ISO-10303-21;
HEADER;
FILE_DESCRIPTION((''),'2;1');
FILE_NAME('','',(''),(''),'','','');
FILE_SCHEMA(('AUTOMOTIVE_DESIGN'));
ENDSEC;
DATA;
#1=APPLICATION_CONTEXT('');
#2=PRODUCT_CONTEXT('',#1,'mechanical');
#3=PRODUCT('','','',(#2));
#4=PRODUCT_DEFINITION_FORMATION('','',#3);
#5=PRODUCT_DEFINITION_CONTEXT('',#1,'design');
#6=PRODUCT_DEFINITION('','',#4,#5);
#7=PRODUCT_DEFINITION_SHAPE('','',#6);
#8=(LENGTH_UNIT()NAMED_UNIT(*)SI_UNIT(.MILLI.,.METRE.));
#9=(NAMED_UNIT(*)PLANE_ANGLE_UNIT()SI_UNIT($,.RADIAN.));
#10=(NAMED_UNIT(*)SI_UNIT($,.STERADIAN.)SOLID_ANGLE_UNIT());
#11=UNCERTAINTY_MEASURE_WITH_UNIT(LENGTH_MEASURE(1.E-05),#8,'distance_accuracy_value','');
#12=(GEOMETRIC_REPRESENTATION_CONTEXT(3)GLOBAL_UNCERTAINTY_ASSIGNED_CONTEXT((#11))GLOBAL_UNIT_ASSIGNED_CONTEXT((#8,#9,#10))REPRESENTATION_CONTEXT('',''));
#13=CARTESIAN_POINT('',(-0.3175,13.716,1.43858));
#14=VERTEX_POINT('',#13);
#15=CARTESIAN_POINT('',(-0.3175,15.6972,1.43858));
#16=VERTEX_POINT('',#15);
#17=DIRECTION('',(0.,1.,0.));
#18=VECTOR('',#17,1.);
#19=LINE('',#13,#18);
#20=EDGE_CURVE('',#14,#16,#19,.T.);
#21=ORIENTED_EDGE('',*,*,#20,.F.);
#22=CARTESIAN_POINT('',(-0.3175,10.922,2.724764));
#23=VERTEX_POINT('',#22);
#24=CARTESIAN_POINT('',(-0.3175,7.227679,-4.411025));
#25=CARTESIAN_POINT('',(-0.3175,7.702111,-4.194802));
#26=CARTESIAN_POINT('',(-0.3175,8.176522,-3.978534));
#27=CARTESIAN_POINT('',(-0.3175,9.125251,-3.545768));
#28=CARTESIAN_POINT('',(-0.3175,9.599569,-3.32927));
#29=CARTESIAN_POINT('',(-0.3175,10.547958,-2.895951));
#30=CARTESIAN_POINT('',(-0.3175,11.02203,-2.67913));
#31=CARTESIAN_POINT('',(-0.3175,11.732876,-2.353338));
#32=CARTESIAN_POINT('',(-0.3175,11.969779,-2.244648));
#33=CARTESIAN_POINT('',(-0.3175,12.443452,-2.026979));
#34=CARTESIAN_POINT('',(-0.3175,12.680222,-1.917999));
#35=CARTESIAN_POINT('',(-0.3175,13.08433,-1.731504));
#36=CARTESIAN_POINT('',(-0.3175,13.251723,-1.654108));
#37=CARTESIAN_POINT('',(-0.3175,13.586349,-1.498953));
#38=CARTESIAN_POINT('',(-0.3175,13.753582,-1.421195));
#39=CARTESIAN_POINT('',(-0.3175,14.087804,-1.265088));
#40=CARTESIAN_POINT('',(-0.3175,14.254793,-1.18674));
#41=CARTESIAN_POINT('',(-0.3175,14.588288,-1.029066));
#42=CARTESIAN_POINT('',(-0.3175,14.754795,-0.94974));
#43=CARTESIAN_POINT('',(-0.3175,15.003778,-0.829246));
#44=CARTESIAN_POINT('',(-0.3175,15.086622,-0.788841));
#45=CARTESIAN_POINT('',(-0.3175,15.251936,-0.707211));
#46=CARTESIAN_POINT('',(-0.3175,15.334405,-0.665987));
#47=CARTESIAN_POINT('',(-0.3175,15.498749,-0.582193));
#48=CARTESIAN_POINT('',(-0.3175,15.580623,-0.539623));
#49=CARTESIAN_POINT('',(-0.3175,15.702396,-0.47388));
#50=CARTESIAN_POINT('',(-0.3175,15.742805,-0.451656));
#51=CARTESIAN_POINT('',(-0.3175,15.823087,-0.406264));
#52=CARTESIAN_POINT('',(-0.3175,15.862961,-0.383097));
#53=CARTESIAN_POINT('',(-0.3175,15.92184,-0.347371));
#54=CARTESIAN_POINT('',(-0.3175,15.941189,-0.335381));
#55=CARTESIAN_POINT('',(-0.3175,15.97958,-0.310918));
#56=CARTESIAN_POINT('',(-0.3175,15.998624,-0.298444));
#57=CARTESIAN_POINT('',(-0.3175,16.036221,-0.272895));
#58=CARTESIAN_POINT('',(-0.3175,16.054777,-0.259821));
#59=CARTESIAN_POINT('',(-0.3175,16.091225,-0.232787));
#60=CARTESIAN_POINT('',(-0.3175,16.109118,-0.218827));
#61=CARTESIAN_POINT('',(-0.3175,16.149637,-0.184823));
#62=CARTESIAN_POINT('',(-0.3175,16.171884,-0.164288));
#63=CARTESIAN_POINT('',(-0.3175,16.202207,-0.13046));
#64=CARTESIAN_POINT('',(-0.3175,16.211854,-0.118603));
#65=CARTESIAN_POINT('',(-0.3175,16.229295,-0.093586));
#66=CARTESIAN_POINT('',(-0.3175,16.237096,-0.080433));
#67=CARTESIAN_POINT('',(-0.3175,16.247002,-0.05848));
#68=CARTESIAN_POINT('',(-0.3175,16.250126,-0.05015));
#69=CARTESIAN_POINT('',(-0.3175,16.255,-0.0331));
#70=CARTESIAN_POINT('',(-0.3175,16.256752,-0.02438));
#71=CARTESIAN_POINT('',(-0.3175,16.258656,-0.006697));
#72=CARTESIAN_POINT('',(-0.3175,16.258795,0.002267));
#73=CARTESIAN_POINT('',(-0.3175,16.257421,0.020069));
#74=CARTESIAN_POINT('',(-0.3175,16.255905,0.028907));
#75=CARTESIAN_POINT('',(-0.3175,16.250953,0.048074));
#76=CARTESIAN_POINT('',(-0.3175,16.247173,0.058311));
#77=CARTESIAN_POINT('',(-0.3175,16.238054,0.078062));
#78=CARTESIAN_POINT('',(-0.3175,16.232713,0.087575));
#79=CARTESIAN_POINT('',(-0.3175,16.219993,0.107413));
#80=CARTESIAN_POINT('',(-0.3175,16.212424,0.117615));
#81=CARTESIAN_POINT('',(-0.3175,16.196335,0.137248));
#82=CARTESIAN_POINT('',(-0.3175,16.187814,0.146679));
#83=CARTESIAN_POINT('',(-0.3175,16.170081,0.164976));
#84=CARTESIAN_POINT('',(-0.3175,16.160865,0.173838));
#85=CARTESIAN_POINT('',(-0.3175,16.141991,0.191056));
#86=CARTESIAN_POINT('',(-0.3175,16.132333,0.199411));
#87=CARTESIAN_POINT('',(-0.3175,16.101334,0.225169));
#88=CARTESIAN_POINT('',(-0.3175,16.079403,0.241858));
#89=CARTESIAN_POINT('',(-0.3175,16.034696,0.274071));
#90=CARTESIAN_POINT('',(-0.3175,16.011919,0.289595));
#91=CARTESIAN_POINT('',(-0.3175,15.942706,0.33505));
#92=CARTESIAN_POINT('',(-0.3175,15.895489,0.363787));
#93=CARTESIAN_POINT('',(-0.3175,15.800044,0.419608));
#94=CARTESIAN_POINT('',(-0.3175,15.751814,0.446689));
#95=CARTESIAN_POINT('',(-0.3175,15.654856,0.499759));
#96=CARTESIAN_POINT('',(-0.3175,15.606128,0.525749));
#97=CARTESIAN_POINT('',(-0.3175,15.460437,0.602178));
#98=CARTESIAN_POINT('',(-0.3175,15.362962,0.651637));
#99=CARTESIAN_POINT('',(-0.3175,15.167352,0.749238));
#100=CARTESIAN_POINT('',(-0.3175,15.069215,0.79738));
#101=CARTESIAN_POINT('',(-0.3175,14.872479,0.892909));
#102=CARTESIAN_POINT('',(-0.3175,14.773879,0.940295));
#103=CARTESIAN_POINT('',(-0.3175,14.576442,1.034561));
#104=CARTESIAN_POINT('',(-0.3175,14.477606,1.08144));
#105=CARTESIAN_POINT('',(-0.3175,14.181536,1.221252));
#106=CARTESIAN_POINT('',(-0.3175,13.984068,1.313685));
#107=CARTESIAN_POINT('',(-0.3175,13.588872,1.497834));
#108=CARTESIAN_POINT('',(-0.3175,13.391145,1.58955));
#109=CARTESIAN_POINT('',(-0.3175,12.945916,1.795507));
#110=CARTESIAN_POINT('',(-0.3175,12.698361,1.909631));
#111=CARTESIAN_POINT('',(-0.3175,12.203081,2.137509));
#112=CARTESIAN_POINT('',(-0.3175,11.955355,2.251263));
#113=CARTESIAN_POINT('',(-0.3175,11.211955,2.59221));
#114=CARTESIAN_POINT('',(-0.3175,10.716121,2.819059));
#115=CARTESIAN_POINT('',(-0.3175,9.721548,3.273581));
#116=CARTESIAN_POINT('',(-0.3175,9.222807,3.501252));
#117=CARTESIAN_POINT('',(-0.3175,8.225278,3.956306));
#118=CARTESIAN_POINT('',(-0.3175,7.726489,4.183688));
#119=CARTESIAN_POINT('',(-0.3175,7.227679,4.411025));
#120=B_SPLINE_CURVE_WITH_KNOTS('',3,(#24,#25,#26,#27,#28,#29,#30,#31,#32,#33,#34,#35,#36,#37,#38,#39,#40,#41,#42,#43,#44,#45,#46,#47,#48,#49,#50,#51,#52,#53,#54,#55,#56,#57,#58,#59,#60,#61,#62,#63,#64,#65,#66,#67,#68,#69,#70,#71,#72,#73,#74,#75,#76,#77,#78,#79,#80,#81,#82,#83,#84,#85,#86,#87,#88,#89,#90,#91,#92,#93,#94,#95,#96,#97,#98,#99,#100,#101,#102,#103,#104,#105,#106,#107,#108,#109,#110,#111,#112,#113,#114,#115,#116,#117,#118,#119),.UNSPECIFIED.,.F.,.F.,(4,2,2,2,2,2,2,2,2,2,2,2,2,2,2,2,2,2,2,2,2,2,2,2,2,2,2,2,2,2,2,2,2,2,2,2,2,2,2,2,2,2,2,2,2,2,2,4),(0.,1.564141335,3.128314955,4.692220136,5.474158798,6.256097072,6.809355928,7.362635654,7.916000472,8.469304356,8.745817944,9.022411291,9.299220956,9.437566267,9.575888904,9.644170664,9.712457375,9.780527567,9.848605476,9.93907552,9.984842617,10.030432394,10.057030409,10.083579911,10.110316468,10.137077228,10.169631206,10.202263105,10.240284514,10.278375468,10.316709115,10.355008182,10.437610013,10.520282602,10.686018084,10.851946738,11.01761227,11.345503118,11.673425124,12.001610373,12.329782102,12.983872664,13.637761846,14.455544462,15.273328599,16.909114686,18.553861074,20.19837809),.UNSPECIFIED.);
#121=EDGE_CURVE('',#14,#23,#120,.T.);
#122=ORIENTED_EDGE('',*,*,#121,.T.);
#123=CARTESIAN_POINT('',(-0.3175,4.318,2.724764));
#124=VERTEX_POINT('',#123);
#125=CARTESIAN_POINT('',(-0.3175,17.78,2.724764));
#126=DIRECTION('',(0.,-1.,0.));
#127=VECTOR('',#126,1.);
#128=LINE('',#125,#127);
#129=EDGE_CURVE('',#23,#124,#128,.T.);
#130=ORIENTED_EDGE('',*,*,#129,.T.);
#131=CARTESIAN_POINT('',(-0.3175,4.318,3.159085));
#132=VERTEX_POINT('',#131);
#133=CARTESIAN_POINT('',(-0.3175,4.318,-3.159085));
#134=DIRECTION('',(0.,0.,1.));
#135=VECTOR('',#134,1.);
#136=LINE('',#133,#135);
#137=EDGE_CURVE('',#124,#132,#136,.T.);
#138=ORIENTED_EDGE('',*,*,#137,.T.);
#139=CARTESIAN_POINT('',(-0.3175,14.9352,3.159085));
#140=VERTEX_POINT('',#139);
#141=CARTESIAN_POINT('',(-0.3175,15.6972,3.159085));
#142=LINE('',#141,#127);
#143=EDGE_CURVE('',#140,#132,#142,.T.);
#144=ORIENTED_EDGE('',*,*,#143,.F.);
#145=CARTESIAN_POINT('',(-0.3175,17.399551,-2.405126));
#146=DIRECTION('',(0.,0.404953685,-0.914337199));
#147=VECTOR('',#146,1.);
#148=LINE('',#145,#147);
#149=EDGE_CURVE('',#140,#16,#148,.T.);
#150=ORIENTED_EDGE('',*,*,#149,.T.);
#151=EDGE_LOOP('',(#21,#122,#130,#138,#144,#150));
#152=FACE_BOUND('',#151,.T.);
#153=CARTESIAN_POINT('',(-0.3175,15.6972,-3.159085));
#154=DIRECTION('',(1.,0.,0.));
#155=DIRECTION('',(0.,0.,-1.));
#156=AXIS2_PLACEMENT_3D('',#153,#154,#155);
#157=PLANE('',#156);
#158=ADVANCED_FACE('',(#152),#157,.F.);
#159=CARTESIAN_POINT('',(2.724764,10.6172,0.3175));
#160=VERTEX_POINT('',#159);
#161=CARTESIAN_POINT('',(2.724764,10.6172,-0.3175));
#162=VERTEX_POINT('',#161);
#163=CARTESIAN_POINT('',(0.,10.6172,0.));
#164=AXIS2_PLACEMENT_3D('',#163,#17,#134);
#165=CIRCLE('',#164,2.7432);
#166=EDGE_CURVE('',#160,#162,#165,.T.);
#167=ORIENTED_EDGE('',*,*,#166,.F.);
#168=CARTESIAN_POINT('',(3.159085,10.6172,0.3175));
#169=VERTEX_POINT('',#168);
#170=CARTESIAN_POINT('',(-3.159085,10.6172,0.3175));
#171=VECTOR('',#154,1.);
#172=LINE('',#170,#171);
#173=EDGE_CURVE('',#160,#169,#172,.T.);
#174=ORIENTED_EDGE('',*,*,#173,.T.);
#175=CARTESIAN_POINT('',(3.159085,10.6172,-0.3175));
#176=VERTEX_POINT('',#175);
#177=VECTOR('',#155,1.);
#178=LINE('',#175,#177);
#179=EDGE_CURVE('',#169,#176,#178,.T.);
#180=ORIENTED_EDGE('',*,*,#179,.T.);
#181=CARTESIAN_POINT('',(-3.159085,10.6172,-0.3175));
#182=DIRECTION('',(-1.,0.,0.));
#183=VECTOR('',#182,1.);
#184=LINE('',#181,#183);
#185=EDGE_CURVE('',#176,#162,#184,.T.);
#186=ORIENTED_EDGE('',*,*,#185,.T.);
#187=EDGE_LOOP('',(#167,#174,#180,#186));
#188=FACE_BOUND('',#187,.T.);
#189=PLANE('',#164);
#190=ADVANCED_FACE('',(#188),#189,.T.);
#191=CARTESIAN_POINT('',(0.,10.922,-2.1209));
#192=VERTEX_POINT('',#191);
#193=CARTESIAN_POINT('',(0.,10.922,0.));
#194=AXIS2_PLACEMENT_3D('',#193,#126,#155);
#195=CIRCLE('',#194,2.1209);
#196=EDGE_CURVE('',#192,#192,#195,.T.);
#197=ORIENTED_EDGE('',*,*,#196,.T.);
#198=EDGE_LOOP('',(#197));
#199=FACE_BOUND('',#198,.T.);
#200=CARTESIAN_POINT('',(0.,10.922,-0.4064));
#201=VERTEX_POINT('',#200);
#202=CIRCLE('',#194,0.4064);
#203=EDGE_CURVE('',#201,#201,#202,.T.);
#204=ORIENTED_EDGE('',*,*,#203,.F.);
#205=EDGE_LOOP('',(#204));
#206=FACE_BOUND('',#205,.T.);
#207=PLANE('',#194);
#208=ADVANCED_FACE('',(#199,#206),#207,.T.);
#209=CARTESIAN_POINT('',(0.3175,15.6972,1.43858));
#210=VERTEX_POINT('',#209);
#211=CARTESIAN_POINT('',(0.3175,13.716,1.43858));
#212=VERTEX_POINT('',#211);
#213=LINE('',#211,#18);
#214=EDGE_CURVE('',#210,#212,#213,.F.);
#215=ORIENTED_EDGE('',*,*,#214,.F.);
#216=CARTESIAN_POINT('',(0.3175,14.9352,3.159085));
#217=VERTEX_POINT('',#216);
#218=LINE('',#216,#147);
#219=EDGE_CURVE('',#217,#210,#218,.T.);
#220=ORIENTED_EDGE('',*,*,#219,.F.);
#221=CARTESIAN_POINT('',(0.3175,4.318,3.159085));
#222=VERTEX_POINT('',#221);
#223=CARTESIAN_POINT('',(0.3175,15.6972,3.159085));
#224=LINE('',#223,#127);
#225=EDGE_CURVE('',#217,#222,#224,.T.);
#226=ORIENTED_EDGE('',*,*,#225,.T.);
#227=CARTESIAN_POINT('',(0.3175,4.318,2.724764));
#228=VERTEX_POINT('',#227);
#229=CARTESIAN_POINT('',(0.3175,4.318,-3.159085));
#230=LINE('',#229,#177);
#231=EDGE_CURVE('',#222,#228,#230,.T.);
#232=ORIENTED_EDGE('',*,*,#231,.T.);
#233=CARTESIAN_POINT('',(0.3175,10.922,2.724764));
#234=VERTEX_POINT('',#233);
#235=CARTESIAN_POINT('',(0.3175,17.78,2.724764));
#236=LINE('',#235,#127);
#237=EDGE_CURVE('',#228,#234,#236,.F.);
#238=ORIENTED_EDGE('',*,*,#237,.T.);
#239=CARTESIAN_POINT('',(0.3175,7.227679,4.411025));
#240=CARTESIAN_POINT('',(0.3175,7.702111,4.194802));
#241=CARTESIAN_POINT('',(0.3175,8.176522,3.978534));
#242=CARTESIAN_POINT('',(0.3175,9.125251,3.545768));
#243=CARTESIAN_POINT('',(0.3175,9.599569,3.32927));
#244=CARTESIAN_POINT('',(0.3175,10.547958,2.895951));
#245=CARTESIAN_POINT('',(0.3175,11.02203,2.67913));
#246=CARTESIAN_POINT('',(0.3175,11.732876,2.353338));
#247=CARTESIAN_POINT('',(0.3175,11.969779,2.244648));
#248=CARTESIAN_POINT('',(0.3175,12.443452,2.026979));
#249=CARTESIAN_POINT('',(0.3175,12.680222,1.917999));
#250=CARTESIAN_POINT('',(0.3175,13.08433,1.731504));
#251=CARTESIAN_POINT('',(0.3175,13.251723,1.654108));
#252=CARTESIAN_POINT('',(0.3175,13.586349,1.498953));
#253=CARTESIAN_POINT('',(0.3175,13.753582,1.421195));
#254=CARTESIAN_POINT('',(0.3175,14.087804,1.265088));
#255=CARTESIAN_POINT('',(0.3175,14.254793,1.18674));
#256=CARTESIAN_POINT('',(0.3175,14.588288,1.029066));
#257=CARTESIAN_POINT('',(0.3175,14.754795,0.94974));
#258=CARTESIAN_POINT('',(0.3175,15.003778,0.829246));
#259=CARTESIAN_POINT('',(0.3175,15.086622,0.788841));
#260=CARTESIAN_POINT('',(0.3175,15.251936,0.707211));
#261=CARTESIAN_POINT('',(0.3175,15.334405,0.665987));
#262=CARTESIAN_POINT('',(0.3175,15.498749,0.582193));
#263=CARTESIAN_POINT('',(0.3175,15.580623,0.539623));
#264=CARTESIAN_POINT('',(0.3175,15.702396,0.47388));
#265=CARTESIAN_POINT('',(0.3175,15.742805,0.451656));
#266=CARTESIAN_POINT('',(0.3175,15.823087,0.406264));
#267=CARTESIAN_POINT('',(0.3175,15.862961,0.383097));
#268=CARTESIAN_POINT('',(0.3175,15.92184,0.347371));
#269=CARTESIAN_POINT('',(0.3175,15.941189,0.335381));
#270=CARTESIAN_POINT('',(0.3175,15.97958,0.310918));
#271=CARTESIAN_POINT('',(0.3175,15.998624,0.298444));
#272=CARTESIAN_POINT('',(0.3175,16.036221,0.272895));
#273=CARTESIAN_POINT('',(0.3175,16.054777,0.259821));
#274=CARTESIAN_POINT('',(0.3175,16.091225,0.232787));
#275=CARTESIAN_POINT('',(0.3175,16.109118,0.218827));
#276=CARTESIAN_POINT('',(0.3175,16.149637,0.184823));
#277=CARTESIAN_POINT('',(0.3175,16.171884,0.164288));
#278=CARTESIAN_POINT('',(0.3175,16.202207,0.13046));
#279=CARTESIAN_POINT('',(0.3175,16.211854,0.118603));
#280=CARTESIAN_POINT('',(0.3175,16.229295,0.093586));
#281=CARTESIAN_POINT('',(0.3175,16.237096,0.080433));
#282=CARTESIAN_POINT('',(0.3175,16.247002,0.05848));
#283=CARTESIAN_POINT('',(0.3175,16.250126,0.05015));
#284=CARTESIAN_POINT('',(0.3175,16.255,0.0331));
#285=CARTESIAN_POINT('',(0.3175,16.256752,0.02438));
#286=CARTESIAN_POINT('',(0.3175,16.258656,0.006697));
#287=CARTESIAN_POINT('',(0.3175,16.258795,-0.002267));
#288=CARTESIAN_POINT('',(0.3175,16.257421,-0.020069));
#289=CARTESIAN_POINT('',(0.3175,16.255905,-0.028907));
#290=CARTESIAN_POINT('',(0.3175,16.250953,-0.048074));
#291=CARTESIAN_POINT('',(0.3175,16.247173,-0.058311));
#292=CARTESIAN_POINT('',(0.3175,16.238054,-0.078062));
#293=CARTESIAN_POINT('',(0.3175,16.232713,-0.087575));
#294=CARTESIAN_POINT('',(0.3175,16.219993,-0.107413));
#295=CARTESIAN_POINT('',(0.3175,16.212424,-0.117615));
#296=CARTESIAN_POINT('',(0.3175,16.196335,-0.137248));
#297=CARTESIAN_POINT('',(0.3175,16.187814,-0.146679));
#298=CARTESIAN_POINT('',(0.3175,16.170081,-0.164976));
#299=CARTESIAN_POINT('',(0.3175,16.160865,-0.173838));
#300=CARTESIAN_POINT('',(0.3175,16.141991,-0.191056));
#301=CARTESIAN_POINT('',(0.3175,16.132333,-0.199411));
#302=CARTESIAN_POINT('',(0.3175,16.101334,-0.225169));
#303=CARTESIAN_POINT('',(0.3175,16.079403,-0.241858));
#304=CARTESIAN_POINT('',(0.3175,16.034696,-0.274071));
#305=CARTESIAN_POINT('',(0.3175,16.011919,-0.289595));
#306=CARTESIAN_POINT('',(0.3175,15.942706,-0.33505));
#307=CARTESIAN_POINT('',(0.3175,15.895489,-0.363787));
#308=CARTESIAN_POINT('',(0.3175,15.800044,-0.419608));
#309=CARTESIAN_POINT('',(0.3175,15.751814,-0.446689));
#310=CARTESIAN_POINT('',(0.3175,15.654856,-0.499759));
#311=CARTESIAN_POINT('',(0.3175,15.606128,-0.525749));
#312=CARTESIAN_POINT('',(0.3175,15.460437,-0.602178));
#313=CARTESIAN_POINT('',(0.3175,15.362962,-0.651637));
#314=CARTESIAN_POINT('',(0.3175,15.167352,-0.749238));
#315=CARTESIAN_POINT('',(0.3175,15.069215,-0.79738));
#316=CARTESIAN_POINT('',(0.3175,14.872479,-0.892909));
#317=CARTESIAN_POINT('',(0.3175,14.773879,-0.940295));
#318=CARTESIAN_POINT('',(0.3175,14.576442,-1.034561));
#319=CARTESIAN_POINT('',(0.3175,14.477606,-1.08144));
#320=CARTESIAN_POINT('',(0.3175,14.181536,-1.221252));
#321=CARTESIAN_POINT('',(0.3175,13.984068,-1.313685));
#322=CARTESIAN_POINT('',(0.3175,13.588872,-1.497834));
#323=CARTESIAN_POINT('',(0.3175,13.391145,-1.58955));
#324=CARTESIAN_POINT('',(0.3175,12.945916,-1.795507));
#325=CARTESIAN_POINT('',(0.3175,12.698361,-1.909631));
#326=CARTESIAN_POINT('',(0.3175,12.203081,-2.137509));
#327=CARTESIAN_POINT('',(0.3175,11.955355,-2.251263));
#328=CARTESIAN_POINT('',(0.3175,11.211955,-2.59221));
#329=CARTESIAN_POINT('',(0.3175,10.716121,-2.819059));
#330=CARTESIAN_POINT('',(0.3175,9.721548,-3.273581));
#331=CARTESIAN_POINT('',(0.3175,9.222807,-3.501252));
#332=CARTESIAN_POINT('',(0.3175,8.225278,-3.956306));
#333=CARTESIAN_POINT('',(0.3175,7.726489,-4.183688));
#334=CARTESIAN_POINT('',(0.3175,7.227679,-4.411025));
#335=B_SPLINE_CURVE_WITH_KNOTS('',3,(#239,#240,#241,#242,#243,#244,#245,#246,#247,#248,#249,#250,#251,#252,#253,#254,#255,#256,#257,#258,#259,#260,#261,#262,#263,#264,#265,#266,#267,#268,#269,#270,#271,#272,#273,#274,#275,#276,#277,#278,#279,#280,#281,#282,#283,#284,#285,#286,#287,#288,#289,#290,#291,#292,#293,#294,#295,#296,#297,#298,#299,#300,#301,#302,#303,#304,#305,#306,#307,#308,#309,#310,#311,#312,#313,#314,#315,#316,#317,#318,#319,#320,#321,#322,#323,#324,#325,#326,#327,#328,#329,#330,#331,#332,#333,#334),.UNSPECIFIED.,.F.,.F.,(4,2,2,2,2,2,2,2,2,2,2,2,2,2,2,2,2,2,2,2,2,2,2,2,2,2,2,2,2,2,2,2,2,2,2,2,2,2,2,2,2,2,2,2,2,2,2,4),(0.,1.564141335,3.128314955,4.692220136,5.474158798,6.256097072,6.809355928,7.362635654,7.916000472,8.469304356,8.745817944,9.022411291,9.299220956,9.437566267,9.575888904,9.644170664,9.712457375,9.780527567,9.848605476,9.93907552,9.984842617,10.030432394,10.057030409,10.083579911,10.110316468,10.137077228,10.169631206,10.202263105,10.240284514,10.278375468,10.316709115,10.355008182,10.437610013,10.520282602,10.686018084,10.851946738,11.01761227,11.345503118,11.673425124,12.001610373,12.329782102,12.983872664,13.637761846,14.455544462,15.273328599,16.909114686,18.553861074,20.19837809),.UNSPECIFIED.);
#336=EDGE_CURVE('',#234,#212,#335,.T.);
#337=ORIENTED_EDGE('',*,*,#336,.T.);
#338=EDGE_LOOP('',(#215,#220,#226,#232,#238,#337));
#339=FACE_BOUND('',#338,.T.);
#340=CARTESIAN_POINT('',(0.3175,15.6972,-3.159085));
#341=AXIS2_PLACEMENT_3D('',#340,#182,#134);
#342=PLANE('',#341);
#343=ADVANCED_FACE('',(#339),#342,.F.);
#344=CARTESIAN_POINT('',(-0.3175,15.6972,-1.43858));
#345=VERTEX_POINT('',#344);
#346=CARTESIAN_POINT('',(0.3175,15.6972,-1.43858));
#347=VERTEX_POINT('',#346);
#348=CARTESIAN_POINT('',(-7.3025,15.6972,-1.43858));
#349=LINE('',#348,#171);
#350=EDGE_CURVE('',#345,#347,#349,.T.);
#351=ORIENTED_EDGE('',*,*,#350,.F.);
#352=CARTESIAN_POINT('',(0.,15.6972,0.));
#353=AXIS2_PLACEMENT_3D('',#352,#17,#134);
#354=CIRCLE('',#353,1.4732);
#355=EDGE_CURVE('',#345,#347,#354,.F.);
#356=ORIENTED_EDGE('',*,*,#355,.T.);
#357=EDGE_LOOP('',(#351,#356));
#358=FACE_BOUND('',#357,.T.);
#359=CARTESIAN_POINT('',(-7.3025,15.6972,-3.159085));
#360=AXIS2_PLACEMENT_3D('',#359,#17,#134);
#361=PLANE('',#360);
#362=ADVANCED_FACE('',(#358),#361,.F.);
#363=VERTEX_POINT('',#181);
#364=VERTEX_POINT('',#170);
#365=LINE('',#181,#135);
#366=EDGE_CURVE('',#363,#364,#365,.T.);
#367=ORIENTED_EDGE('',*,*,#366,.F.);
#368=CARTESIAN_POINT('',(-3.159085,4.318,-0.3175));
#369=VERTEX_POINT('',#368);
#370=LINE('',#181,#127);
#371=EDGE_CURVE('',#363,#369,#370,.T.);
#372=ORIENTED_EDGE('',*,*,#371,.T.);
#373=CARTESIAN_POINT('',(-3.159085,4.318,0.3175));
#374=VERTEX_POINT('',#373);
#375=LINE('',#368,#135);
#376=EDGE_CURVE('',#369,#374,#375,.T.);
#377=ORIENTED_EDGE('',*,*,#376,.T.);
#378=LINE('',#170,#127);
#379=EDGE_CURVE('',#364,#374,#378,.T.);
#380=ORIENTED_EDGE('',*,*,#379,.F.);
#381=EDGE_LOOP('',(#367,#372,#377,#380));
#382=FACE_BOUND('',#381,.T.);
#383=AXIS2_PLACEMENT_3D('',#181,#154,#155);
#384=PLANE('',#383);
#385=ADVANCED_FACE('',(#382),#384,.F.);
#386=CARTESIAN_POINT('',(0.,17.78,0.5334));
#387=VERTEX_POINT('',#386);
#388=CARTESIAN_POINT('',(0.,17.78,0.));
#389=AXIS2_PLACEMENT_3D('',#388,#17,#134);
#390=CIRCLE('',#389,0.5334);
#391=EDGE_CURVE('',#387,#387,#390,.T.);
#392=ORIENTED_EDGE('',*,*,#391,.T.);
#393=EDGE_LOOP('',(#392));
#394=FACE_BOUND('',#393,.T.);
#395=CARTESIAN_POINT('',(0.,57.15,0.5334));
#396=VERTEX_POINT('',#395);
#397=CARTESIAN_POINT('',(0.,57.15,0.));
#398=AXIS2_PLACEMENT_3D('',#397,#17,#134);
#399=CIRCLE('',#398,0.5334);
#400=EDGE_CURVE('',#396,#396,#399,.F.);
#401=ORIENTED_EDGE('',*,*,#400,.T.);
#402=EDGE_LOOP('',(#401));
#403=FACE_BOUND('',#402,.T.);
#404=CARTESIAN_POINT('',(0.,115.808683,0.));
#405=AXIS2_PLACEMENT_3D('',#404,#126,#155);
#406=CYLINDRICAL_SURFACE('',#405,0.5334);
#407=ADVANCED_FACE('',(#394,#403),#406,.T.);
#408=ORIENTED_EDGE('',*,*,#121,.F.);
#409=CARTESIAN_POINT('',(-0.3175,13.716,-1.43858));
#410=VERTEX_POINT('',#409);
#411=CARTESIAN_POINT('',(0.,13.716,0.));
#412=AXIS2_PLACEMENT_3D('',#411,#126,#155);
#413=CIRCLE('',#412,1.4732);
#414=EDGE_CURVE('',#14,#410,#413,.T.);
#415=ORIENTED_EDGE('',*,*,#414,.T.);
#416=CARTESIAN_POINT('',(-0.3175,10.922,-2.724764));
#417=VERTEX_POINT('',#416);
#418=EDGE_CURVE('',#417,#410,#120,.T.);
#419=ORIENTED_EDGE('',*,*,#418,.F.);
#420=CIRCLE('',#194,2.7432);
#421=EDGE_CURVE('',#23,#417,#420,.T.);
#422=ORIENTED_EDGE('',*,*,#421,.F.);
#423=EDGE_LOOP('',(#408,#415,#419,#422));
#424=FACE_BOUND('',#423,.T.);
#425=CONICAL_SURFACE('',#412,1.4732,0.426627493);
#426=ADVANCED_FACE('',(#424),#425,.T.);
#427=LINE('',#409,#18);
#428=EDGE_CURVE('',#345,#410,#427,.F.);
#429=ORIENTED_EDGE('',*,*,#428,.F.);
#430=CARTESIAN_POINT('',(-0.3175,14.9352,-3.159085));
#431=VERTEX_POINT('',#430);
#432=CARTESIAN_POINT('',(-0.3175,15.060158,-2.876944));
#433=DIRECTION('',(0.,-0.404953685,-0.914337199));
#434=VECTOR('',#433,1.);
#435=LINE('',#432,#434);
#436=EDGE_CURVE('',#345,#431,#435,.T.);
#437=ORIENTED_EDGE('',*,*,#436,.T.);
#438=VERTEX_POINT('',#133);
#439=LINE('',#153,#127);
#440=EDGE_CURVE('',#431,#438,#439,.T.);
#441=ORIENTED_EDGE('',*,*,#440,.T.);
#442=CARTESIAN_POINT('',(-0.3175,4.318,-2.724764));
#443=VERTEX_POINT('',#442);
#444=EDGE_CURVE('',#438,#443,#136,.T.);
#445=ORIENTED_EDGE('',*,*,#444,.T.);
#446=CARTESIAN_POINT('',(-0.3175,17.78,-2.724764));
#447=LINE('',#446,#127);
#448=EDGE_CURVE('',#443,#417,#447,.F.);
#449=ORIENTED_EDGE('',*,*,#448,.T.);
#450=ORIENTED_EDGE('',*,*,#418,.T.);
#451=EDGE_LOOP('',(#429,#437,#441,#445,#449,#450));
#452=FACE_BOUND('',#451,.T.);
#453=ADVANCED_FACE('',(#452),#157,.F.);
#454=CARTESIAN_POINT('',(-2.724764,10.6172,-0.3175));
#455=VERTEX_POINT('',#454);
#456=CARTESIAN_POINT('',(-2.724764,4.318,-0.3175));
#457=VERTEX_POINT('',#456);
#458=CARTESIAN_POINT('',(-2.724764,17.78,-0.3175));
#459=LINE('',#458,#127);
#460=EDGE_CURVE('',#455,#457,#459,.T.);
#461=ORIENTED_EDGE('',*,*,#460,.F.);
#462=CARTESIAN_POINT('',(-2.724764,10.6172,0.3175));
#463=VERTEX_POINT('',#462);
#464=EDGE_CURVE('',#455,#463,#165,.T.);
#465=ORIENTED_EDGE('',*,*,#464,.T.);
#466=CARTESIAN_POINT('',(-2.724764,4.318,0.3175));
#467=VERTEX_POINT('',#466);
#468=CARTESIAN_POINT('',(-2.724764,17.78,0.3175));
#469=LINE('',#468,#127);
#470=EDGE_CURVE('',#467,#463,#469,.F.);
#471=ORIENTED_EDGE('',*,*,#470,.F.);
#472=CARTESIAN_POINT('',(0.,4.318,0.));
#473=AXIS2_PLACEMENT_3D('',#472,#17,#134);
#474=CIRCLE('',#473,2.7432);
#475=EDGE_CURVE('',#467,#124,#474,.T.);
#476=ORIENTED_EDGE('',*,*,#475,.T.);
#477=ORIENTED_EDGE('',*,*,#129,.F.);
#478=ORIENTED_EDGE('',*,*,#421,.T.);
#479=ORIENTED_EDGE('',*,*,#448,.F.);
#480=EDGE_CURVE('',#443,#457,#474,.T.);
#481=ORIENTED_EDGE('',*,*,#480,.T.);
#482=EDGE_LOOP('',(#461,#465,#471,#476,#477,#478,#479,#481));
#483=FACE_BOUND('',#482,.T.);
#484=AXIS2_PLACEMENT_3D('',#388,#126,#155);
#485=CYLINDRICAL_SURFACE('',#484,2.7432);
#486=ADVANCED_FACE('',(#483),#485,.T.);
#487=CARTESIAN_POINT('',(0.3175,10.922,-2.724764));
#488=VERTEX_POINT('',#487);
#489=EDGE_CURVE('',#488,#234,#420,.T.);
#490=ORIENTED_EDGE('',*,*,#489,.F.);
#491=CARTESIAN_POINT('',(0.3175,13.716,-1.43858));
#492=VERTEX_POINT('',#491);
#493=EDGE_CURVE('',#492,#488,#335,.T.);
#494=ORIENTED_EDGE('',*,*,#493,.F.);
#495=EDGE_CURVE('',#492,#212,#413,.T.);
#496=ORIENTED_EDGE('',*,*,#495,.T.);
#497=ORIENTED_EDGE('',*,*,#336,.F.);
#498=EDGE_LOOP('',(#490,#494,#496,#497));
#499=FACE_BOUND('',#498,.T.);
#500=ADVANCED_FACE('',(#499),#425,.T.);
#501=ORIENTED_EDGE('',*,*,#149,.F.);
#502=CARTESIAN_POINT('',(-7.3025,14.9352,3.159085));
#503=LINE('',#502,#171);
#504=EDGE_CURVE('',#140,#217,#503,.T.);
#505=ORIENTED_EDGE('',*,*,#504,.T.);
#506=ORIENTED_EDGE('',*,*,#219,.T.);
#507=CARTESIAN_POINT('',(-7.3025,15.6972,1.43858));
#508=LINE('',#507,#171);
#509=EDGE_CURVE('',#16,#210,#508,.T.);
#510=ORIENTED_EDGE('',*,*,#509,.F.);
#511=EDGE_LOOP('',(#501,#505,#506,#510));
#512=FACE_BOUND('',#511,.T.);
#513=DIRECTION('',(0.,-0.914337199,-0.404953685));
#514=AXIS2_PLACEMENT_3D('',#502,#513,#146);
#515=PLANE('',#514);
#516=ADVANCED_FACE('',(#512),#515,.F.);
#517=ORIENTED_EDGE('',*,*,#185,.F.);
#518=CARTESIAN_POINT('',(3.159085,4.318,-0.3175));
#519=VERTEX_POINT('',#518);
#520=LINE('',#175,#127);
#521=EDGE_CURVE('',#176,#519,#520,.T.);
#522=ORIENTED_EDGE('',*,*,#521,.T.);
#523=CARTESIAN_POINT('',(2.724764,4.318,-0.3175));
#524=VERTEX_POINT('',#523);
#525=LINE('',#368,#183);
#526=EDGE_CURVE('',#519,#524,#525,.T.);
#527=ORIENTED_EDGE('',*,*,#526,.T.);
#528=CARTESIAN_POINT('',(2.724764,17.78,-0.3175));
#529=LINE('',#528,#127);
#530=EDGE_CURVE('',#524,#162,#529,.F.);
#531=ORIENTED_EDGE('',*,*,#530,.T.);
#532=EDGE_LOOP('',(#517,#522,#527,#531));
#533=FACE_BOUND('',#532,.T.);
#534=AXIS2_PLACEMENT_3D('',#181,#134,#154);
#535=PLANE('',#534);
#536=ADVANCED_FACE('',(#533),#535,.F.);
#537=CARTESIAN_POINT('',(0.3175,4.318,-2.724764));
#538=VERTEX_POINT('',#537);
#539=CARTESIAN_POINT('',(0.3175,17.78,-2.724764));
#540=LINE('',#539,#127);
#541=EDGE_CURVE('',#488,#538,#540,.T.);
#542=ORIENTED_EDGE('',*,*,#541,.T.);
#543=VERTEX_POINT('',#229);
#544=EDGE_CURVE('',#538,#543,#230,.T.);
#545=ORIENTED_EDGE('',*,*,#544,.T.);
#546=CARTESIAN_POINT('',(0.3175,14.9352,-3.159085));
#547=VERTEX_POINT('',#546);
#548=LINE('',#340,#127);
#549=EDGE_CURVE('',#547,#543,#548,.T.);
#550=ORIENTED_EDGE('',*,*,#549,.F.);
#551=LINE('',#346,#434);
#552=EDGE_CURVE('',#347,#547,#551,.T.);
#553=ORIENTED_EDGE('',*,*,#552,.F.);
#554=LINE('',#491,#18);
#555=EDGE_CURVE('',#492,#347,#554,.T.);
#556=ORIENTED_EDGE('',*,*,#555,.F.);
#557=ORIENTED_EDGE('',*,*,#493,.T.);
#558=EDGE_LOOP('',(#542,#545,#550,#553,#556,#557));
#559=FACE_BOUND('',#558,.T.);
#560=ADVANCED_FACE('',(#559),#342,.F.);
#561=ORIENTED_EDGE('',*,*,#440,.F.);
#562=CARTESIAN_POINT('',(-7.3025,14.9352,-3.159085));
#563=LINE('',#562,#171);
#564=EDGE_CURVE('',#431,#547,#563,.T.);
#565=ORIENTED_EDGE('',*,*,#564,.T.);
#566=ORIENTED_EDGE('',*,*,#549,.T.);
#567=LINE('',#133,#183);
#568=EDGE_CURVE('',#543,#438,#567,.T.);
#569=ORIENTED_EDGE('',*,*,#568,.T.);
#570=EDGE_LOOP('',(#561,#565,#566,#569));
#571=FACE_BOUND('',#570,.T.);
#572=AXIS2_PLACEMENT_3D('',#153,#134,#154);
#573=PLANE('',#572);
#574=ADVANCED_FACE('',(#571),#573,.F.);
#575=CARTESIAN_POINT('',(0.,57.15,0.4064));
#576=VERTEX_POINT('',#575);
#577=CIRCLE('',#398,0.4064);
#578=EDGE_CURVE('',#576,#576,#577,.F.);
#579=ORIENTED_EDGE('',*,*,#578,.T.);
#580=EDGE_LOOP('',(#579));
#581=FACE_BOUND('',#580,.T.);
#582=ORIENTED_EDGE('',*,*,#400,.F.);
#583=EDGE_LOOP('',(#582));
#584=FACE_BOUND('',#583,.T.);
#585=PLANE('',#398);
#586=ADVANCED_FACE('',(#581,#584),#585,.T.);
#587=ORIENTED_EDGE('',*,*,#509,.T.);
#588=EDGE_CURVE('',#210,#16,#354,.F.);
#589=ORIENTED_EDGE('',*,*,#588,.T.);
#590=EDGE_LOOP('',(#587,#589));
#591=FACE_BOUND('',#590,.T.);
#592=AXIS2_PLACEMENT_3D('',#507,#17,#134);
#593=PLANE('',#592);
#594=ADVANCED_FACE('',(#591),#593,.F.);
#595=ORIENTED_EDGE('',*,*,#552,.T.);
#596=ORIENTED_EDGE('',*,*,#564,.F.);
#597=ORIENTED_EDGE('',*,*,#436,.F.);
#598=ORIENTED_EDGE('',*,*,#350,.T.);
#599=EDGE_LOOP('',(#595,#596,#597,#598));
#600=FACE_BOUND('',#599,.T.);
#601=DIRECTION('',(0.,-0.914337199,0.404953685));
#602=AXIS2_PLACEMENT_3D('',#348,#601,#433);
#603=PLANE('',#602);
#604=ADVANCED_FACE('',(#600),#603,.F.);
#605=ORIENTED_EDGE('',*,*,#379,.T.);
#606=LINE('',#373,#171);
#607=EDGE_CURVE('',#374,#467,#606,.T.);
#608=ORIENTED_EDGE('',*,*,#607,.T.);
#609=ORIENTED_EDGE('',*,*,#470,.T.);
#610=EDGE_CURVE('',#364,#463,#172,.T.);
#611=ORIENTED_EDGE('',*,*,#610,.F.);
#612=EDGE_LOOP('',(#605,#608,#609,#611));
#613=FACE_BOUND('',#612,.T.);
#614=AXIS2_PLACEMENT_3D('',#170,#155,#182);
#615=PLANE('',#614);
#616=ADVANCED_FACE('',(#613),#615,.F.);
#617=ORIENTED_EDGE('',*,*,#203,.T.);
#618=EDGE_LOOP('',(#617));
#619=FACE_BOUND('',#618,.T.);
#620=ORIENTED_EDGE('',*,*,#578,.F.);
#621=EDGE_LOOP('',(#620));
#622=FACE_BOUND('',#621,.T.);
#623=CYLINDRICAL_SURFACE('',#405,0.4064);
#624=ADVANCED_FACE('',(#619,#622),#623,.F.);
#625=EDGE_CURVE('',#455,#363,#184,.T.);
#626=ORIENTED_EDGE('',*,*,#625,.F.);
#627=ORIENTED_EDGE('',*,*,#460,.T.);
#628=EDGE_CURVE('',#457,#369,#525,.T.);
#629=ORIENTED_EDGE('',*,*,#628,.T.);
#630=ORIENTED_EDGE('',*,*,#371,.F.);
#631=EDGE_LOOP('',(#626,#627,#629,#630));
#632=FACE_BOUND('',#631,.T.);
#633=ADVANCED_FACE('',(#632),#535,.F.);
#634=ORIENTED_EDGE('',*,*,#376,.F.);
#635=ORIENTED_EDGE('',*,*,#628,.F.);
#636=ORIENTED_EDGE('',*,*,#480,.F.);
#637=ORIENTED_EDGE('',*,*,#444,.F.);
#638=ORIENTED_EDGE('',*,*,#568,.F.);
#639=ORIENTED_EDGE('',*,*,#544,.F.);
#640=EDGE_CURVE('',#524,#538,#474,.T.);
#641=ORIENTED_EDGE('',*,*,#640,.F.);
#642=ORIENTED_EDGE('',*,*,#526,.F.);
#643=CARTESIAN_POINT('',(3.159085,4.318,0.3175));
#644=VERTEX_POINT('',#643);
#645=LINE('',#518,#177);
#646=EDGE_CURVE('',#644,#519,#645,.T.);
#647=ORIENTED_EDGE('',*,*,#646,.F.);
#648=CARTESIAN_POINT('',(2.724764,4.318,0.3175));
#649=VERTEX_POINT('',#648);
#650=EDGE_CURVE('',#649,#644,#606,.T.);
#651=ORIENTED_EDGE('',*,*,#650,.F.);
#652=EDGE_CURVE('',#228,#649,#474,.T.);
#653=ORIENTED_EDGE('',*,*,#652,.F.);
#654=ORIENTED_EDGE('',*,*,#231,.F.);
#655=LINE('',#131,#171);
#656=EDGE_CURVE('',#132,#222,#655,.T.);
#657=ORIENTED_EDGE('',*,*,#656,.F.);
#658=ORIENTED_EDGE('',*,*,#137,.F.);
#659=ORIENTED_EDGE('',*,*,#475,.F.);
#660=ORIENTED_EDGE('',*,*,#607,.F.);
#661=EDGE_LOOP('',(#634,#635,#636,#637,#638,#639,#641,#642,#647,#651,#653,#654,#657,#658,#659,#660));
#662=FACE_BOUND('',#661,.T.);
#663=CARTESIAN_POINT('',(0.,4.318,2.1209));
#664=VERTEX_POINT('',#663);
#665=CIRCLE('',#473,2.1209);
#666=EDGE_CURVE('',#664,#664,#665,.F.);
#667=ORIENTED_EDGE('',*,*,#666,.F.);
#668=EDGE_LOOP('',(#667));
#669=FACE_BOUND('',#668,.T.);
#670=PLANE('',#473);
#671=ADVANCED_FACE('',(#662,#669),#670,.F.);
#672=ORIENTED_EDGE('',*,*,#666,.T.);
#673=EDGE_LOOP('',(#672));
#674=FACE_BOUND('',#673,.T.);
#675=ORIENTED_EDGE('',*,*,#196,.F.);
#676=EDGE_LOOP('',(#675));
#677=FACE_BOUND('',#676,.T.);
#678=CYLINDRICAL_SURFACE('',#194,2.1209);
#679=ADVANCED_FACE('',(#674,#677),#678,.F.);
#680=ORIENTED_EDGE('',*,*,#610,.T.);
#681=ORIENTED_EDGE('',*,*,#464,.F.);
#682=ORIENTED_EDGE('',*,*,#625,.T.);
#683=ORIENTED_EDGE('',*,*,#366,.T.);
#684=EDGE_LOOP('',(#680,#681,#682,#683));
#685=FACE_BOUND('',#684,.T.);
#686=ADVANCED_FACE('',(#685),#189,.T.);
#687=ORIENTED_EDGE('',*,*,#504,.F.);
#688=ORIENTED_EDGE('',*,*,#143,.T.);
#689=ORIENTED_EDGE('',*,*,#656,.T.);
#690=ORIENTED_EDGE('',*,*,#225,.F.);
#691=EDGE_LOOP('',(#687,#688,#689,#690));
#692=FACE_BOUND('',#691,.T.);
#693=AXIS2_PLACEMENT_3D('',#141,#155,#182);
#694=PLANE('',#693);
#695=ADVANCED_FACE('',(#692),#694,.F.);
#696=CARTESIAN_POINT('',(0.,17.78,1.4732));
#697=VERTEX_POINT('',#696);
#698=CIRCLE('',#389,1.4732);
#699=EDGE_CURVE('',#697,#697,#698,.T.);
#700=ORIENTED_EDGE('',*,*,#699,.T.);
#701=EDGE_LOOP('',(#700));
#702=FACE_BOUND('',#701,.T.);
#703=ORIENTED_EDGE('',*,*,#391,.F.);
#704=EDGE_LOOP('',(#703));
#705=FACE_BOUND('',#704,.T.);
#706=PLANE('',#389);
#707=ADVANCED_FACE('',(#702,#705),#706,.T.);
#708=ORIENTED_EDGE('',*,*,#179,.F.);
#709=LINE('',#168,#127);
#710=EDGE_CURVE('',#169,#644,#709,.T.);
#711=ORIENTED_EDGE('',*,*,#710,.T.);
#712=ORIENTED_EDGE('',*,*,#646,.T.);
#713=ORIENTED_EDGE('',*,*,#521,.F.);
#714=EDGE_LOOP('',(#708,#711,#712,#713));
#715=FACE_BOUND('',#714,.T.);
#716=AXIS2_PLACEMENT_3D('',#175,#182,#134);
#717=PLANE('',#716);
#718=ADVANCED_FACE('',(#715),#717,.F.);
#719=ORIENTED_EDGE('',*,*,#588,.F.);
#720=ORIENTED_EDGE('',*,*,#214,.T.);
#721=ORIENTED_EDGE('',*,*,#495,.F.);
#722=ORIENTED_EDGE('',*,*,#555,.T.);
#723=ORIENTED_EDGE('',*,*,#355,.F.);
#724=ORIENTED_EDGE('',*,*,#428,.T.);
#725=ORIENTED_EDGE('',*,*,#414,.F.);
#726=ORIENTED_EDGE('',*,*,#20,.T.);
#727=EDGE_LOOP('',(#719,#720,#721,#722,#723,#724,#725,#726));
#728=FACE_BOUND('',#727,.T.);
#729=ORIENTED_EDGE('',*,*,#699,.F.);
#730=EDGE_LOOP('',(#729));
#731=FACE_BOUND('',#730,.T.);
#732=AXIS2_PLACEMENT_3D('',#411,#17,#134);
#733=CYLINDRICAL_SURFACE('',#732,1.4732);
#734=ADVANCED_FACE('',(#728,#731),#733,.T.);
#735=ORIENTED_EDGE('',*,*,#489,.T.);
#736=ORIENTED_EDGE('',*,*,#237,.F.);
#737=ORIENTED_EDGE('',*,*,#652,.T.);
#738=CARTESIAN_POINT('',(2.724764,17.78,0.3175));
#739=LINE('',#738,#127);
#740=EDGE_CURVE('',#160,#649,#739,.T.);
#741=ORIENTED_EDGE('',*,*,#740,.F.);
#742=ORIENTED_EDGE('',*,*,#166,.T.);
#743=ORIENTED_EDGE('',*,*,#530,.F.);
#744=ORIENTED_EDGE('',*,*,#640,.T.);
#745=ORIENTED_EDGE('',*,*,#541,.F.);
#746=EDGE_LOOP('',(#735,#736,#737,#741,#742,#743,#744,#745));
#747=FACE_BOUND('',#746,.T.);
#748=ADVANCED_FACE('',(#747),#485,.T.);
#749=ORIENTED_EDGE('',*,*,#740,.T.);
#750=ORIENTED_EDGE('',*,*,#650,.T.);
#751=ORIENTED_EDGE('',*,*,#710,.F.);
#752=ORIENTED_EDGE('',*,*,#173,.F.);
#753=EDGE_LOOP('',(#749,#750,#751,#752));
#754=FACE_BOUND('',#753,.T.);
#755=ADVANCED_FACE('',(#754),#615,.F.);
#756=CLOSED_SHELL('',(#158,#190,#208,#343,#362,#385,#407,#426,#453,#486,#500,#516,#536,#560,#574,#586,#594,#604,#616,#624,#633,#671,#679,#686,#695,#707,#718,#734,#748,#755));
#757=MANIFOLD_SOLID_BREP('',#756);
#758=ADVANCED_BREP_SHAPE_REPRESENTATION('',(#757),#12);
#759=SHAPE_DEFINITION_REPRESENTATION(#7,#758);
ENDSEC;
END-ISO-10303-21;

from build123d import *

# Parameters (mm, degrees)
SKETCH1_R           = 2.7432
BOSS_EXTRUDE1_DEPTH = 17.78
SKETCH2_R           = 3.175
SKETCH2_R_2         = 1.4732
CUT_EXTRUDE1_DEPTH  = 4.064
SKETCH4_R           = 3.175
BOSS_EXTRUDE2_DEPTH = 2.9972
SKETCH5_W           = 0.635
SKETCH5_H           = 6.318170226
BOSS_EXTRUDE3_DEPTH = 12.7
SKETCH6_W           = 6.318170226
SKETCH6_H           = 0.635
BOSS_EXTRUDE4_DEPTH = 7.62
CUT_EXTRUDE2_DEPTH  = 7.62
SKETCH8_R           = 2.1209
CUT_EXTRUDE3_DEPTH  = 10.922
CUT_EXTRUDE4_START  = -6.858
SKETCH9_R           = 0.508
CUT_EXTRUDE4_DEPTH  = 6.858
SWEEP2_PITCH        = 2.54
SWEEP2_HEIGHT       = 1.143
SWEEP2_RADIUS       = 3.175
SWEEP2_START_ANGLE  = -90
SKETCH10_W          = 0.508
SKETCH10_H          = 0.762
SWEEP3_PITCH        = 2.54
SWEEP3_HEIGHT       = 1.143
SWEEP3_RADIUS       = 3.175
SWEEP3_START_ANGLE  = 90
SKETCH17_W          = 0.508
SKETCH17_H          = 0.762
SKETCH18_R          = 0.5334
SKETCH18_R_2        = 0.4064
BOSS_EXTRUDE6_DEPTH = 46.228
INTERSECT1_DEPTH    = 4.318


# Read off the part's stored shape, not the designer's step: Intersect1
with BuildPart() as part:
    # Sketch1 → Boss-Extrude1 (new body)
    with BuildSketch(Plane(origin=(0, 0, 0), x_dir=(1, 0, 0), z_dir=(0, 1, 0))):
        with Locations(Location((0, 0, 0), (0, 0, 270))):
            Circle(SKETCH1_R)
    extrude(amount=BOSS_EXTRUDE1_DEPTH)

    # Sketch2 → Cut-Extrude1 (cut)
    with BuildSketch(Plane(origin=(0, 17.78, 0), x_dir=(1, 0, 0), z_dir=(0, 1, 0))):
        Circle(SKETCH2_R)
        with Locations(Location((0, 0, 0), (0, 0, 270))):
            Circle(SKETCH2_R_2, mode=Mode.SUBTRACT)
    extrude(amount=-CUT_EXTRUDE1_DEPTH, mode=Mode.SUBTRACT)

    # Sketch3 → Cut-Revolve1 (revolve, cut)
    with BuildSketch(Plane.XY, mode=Mode.PRIVATE) as cut_revolve1_sk:
        Polygon((1.4732, 13.716), (2.7432, 10.922), (2.7432, 13.716), align=None)
    revolve(cut_revolve1_sk.sketch.rotate(Axis((0, 13.716, 0), (0, 1, 0)), 90), axis=Axis((0, 13.716, 0), (0, 1, 0)), mode=Mode.SUBTRACT)

    # Sketch4 → Boss-Extrude2 (add)
    with BuildSketch(Plane.XZ):
        with Locations(Location((0, 0, 0), (0, 0, 270))):
            Circle(SKETCH4_R)
    extrude(amount=-BOSS_EXTRUDE2_DEPTH)

    # Sketch5 → Boss-Extrude3 (add)
    with BuildSketch(Plane(origin=(0, 2.9972, 0), x_dir=(1, 0, 0), z_dir=(0, 1, 0))):
        Rectangle(SKETCH5_W, SKETCH5_H)
    extrude(amount=BOSS_EXTRUDE3_DEPTH)

    # Sketch6 → Boss-Extrude4 (add)
    with BuildSketch(Plane(origin=(0, 2.9972, 0), x_dir=(1, 0, 0), z_dir=(0, 1, 0))):
        Rectangle(SKETCH6_W, SKETCH6_H)
    extrude(amount=BOSS_EXTRUDE4_DEPTH)

    # Sketch7 → Cut-Extrude2 (cut)
    with BuildSketch(Plane(origin=(0.3175, 0, 0), x_dir=(0, 0, -1), z_dir=(1, 0, 0))):
        Polygon((1.438579852, 15.6972), (3.159085113, 14.9352), (3.159085113, 15.6972), align=None)
        Polygon((-1.438579852, 15.6972), (-3.159085113, 15.6972), (-3.159085113, 14.9352), align=None)
    extrude(amount=-CUT_EXTRUDE2_DEPTH, mode=Mode.SUBTRACT)

    # Sketch8 → Cut-Extrude3 (cut)
    with BuildSketch(Plane.XZ):
        with Locations(Location((0, 0, 0), (0, 0, 270))):
            Circle(SKETCH8_R)
    extrude(amount=-CUT_EXTRUDE3_DEPTH, mode=Mode.SUBTRACT)

    # Sketch9 → Cut-Extrude4 (cut)
    with BuildSketch(Plane(origin=(0, 17.78, 0), x_dir=(1, 0, 0), z_dir=(0, 1, 0)).offset(CUT_EXTRUDE4_START)):
        with Locations(Location((0, 0, 0), (0, 0, 270))):
            Circle(SKETCH9_R)
    extrude(amount=CUT_EXTRUDE4_DEPTH, mode=Mode.SUBTRACT)

    # Sweep2: sweep along a helix
    with BuildLine() as sweep2_path:
        add(Helix(SWEEP2_PITCH, SWEEP2_HEIGHT, SWEEP2_RADIUS, center=(0, 0.508, 0), direction=(0, 1, 0), mode=Mode.PRIVATE).rotate(Axis((0, 0.508, 0), (0, 1, 0)), SWEEP2_START_ANGLE))
    # Sketch10 → Sweep2 (sweep)
    with BuildSketch(Plane.XY):
        with Locations((-3.429, 0.889)):
            Rectangle(SKETCH10_W, SKETCH10_H)
    sweep(path=sweep2_path.line, is_frenet=True)

    # Sweep3: sweep along a helix
    with BuildLine() as sweep3_path:
        add(Helix(SWEEP3_PITCH, SWEEP3_HEIGHT, SWEEP3_RADIUS, center=(0, 0.508, 0), direction=(0, 1, 0), mode=Mode.PRIVATE).rotate(Axis((0, 0.508, 0), (0, 1, 0)), SWEEP3_START_ANGLE))
    # Sketch17 → Sweep3 (sweep)
    with BuildSketch(Plane.XY):
        with Locations((3.429, 0.889)):
            Rectangle(SKETCH17_W, SKETCH17_H)
    sweep(path=sweep3_path.line, is_frenet=True)

    # Sketch18 → Boss-Extrude6 (add)
    with BuildSketch(Plane.XZ.offset(-10.922)):
        with Locations(Location((0, 0, 0), (0, 0, 90))):
            Circle(SKETCH18_R)
        with Locations(Location((0, 0, 0), (0, 0, 270))):
            Circle(SKETCH18_R_2, mode=Mode.SUBTRACT)
    extrude(amount=-BOSS_EXTRUDE6_DEPTH)

    # Intersect1 outline → Intersect1 (cut)
    with BuildSketch(Plane(origin=(0, 0, 0), x_dir=(1, 0, 0), z_dir=(0, 1, 0))):
        with BuildLine():
            Line((-3.175, 0), (-3.683, 0))
            add(Edge.make_bspline(
                [(-3.683, 0), (-3.683, -1.196679241), (-2.97960959, -2.164813084), (-2.276219181, -3.132946927), (-1.13810959, -3.50274115), (0, -3.872535372), (1.13810959, -3.50274115), (2.276219181, -3.132946927), (2.97960959, -2.164813084), (3.322482299, -1.692889287), (3.50274115, -1.13810959)],
                knots=[0, 0, 0, 0.1, 0.1, 0.2, 0.2, 0.3, 0.3, 0.4, 0.4, 0.45, 0.45, 0.45], degree=2, weights=[1, 0.951056516, 1, 0.951056516, 1, 0.951056516, 1, 0.951056516, 1, 0.975528258, 0.975528258]))
            Line((3.50274115, -1.13810959), (3.019604439, -0.981128957))
            ThreePointArc((3.019604439, -0.981128957), (1.992470769, -2.471980023), (0.3175, -3.159085113))
            ThreePointArc((0.3175, -3.159085113), (0, -3.175), (-0.3175, -3.159085113))
            ThreePointArc((-0.3175, -3.159085113), (-2.24506403, -2.24506403), (-3.159085113, -0.3175))
            ThreePointArc((-3.159085113, -0.3175), (-3.171018782, -0.158949311), (-3.175, 0))
        make_face()
        with BuildLine():
            ThreePointArc((-3.159085113, 0.3175), (-3.171018782, 0.158949311), (-3.175, 0))
            ThreePointArc((-3.175, 0), (-3.171018782, -0.158949311), (-3.159085113, -0.3175))
            Line((-3.159085113, -0.3175), (-3.159085113, 0.3175))
        make_face()
        with BuildLine():
            ThreePointArc((0.3175, -3.159085113), (1.992470769, -2.471980023), (3.019604439, -0.981128957))
            ThreePointArc((3.019604439, -0.981128957), (3.107113129, -0.653049008), (3.159085113, -0.3175))
            Line((3.159085113, -0.3175), (2.724764208, -0.3175))
            ThreePointArc((2.724764208, -0.3175), (1.939735322, -1.939735322), (0.3175, -2.724764208))
            Line((0.3175, -2.724764208), (0.3175, -3.159085113))
        make_face()
        with BuildLine():
            ThreePointArc((-3.019604439, 0.981128957), (-3.107113129, 0.653049008), (-3.159085113, 0.3175))
            Line((-3.159085113, 0.3175), (-2.724764208, 0.3175))
            ThreePointArc((-2.724764208, 0.3175), (-1.939735322, 1.939735322), (-0.3175, 2.724764208))
            Line((-0.3175, 2.724764208), (-0.3175, 3.159085113))
            ThreePointArc((-0.3175, 3.159085113), (-1.992470769, 2.471980023), (-3.019604439, 0.981128957))
        make_face()
        with BuildLine():
            Line((-2.724764208, 0.3175), (-3.159085113, 0.3175))
            Line((-3.159085113, 0.3175), (-3.159085113, -0.3175))
            Line((-3.159085113, -0.3175), (-2.724764208, -0.3175))
            ThreePointArc((-2.724764208, -0.3175), (-2.7432, 0), (-2.724764208, 0.3175))
        make_face()
        with BuildLine():
            Line((-2.724764208, -0.3175), (-3.159085113, -0.3175))
            ThreePointArc((-3.159085113, -0.3175), (-2.24506403, -2.24506403), (-0.3175, -3.159085113))
            Line((-0.3175, -3.159085113), (-0.3175, -2.724764208))
            ThreePointArc((-0.3175, -2.724764208), (-1.939735322, -1.939735322), (-2.724764208, -0.3175))
        make_face()
        with BuildLine():
            Line((-0.3175, -3.159085113), (0.3175, -3.159085113))
            Line((0.3175, -3.159085113), (0.3175, -2.724764208))
            Line((0.3175, -2.724764208), (0.3175, -2.097000372))
            ThreePointArc((0.3175, -2.097000372), (0, -2.1209), (-0.3175, -2.097000372))
            Line((-0.3175, -2.097000372), (-0.3175, -2.724764208))
            Line((-0.3175, -2.724764208), (-0.3175, -3.159085113))
        make_face()
        with BuildLine():
            ThreePointArc((-0.3175, -3.159085113), (0, -3.175), (0.3175, -3.159085113))
            Line((0.3175, -3.159085113), (-0.3175, -3.159085113))
        make_face()
        with BuildLine():
            Line((3.159085113, 0.3175), (3.159085113, -0.3175))
            ThreePointArc((3.159085113, -0.3175), (3.171018782, -0.158949311), (3.175, 0))
            ThreePointArc((3.175, 0), (3.171018782, 0.158949311), (3.159085113, 0.3175))
        make_face()
        with BuildLine():
            Line((2.724764208, -0.3175), (3.159085113, -0.3175))
            Line((3.159085113, -0.3175), (3.159085113, 0.3175))
            Line((3.159085113, 0.3175), (2.724764208, 0.3175))
            ThreePointArc((2.724764208, 0.3175), (2.7432, 0), (2.724764208, -0.3175))
        make_face()
        with BuildLine():
            Line((-3.50274115, 1.13810959), (-3.019604439, 0.981128957))
            ThreePointArc((-3.019604439, 0.981128957), (-1.992470769, 2.471980023), (-0.3175, 3.159085113))
            ThreePointArc((-0.3175, 3.159085113), (0, 3.175), (0.3175, 3.159085113))
            ThreePointArc((0.3175, 3.159085113), (2.24506403, 2.24506403), (3.159085113, 0.3175))
            ThreePointArc((3.159085113, 0.3175), (3.171018782, 0.158949311), (3.175, 0))
            Line((3.175, 0), (3.683, 0))
            add(Edge.make_bspline(
                [(3.683, 0), (3.683, 1.196679241), (2.97960959, 2.164813084), (2.276219181, 3.132946927), (1.13810959, 3.50274115), (0, 3.872535372), (-1.13810959, 3.50274115), (-2.276219181, 3.132946927), (-2.97960959, 2.164813084), (-3.322482299, 1.692889287), (-3.50274115, 1.13810959)],
                knots=[0, 0, 0, 0.1, 0.1, 0.2, 0.2, 0.3, 0.3, 0.4, 0.4, 0.45, 0.45, 0.45], degree=2, weights=[1, 0.951056516, 1, 0.951056516, 1, 0.951056516, 1, 0.951056516, 1, 0.975528258, 0.975528258]))
        make_face()
        with BuildLine():
            ThreePointArc((-0.3175, 2.724764208), (-1.939735322, 1.939735322), (-2.724764208, 0.3175))
            ThreePointArc((-2.724764208, 0.3175), (-2.7432, 0), (-2.724764208, -0.3175))
            ThreePointArc((-2.724764208, -0.3175), (-1.939735322, -1.939735322), (-0.3175, -2.724764208))
            Line((-0.3175, -2.724764208), (-0.3175, -2.097000372))
            ThreePointArc((-0.3175, -2.097000372), (-2.1209, 0), (-0.3175, 2.097000372))
            Line((-0.3175, 2.097000372), (-0.3175, 2.724764208))
        make_face()
        with BuildLine():
            Line((0.3175, -2.097000372), (0.3175, -2.724764208))
            ThreePointArc((0.3175, -2.724764208), (1.939735322, -1.939735322), (2.724764208, -0.3175))
            ThreePointArc((2.724764208, -0.3175), (2.7432, 0), (2.724764208, 0.3175))
            ThreePointArc((2.724764208, 0.3175), (1.939735322, 1.939735322), (0.3175, 2.724764208))
            Line((0.3175, 2.724764208), (0.3175, 2.097000372))
            ThreePointArc((0.3175, 2.097000372), (1.608042686, 1.382901128), (2.1209, 0))
            ThreePointArc((2.1209, 0), (1.608042686, -1.382901128), (0.3175, -2.097000372))
        make_face()
        with BuildLine():
            Line((2.724764208, 0.3175), (3.159085113, 0.3175))
            ThreePointArc((3.159085113, 0.3175), (2.24506403, 2.24506403), (0.3175, 3.159085113))
            Line((0.3175, 3.159085113), (0.3175, 2.724764208))
            ThreePointArc((0.3175, 2.724764208), (1.939735322, 1.939735322), (2.724764208, 0.3175))
        make_face()
        with BuildLine():
            ThreePointArc((0.3175, 3.159085113), (0, 3.175), (-0.3175, 3.159085113))
            Line((-0.3175, 3.159085113), (0.3175, 3.159085113))
        make_face()
        with BuildLine():
            Line((0.3175, 3.159085113), (-0.3175, 3.159085113))
            Line((-0.3175, 3.159085113), (-0.3175, 2.724764208))
            Line((-0.3175, 2.724764208), (-0.3175, 2.097000372))
            ThreePointArc((-0.3175, 2.097000372), (0, 2.1209), (0.3175, 2.097000372))
            Line((0.3175, 2.097000372), (0.3175, 2.724764208))
            Line((0.3175, 2.724764208), (0.3175, 3.159085113))
        make_face()
    extrude(amount=INTERSECT1_DEPTH, mode=Mode.SUBTRACT)


solid = part.part
